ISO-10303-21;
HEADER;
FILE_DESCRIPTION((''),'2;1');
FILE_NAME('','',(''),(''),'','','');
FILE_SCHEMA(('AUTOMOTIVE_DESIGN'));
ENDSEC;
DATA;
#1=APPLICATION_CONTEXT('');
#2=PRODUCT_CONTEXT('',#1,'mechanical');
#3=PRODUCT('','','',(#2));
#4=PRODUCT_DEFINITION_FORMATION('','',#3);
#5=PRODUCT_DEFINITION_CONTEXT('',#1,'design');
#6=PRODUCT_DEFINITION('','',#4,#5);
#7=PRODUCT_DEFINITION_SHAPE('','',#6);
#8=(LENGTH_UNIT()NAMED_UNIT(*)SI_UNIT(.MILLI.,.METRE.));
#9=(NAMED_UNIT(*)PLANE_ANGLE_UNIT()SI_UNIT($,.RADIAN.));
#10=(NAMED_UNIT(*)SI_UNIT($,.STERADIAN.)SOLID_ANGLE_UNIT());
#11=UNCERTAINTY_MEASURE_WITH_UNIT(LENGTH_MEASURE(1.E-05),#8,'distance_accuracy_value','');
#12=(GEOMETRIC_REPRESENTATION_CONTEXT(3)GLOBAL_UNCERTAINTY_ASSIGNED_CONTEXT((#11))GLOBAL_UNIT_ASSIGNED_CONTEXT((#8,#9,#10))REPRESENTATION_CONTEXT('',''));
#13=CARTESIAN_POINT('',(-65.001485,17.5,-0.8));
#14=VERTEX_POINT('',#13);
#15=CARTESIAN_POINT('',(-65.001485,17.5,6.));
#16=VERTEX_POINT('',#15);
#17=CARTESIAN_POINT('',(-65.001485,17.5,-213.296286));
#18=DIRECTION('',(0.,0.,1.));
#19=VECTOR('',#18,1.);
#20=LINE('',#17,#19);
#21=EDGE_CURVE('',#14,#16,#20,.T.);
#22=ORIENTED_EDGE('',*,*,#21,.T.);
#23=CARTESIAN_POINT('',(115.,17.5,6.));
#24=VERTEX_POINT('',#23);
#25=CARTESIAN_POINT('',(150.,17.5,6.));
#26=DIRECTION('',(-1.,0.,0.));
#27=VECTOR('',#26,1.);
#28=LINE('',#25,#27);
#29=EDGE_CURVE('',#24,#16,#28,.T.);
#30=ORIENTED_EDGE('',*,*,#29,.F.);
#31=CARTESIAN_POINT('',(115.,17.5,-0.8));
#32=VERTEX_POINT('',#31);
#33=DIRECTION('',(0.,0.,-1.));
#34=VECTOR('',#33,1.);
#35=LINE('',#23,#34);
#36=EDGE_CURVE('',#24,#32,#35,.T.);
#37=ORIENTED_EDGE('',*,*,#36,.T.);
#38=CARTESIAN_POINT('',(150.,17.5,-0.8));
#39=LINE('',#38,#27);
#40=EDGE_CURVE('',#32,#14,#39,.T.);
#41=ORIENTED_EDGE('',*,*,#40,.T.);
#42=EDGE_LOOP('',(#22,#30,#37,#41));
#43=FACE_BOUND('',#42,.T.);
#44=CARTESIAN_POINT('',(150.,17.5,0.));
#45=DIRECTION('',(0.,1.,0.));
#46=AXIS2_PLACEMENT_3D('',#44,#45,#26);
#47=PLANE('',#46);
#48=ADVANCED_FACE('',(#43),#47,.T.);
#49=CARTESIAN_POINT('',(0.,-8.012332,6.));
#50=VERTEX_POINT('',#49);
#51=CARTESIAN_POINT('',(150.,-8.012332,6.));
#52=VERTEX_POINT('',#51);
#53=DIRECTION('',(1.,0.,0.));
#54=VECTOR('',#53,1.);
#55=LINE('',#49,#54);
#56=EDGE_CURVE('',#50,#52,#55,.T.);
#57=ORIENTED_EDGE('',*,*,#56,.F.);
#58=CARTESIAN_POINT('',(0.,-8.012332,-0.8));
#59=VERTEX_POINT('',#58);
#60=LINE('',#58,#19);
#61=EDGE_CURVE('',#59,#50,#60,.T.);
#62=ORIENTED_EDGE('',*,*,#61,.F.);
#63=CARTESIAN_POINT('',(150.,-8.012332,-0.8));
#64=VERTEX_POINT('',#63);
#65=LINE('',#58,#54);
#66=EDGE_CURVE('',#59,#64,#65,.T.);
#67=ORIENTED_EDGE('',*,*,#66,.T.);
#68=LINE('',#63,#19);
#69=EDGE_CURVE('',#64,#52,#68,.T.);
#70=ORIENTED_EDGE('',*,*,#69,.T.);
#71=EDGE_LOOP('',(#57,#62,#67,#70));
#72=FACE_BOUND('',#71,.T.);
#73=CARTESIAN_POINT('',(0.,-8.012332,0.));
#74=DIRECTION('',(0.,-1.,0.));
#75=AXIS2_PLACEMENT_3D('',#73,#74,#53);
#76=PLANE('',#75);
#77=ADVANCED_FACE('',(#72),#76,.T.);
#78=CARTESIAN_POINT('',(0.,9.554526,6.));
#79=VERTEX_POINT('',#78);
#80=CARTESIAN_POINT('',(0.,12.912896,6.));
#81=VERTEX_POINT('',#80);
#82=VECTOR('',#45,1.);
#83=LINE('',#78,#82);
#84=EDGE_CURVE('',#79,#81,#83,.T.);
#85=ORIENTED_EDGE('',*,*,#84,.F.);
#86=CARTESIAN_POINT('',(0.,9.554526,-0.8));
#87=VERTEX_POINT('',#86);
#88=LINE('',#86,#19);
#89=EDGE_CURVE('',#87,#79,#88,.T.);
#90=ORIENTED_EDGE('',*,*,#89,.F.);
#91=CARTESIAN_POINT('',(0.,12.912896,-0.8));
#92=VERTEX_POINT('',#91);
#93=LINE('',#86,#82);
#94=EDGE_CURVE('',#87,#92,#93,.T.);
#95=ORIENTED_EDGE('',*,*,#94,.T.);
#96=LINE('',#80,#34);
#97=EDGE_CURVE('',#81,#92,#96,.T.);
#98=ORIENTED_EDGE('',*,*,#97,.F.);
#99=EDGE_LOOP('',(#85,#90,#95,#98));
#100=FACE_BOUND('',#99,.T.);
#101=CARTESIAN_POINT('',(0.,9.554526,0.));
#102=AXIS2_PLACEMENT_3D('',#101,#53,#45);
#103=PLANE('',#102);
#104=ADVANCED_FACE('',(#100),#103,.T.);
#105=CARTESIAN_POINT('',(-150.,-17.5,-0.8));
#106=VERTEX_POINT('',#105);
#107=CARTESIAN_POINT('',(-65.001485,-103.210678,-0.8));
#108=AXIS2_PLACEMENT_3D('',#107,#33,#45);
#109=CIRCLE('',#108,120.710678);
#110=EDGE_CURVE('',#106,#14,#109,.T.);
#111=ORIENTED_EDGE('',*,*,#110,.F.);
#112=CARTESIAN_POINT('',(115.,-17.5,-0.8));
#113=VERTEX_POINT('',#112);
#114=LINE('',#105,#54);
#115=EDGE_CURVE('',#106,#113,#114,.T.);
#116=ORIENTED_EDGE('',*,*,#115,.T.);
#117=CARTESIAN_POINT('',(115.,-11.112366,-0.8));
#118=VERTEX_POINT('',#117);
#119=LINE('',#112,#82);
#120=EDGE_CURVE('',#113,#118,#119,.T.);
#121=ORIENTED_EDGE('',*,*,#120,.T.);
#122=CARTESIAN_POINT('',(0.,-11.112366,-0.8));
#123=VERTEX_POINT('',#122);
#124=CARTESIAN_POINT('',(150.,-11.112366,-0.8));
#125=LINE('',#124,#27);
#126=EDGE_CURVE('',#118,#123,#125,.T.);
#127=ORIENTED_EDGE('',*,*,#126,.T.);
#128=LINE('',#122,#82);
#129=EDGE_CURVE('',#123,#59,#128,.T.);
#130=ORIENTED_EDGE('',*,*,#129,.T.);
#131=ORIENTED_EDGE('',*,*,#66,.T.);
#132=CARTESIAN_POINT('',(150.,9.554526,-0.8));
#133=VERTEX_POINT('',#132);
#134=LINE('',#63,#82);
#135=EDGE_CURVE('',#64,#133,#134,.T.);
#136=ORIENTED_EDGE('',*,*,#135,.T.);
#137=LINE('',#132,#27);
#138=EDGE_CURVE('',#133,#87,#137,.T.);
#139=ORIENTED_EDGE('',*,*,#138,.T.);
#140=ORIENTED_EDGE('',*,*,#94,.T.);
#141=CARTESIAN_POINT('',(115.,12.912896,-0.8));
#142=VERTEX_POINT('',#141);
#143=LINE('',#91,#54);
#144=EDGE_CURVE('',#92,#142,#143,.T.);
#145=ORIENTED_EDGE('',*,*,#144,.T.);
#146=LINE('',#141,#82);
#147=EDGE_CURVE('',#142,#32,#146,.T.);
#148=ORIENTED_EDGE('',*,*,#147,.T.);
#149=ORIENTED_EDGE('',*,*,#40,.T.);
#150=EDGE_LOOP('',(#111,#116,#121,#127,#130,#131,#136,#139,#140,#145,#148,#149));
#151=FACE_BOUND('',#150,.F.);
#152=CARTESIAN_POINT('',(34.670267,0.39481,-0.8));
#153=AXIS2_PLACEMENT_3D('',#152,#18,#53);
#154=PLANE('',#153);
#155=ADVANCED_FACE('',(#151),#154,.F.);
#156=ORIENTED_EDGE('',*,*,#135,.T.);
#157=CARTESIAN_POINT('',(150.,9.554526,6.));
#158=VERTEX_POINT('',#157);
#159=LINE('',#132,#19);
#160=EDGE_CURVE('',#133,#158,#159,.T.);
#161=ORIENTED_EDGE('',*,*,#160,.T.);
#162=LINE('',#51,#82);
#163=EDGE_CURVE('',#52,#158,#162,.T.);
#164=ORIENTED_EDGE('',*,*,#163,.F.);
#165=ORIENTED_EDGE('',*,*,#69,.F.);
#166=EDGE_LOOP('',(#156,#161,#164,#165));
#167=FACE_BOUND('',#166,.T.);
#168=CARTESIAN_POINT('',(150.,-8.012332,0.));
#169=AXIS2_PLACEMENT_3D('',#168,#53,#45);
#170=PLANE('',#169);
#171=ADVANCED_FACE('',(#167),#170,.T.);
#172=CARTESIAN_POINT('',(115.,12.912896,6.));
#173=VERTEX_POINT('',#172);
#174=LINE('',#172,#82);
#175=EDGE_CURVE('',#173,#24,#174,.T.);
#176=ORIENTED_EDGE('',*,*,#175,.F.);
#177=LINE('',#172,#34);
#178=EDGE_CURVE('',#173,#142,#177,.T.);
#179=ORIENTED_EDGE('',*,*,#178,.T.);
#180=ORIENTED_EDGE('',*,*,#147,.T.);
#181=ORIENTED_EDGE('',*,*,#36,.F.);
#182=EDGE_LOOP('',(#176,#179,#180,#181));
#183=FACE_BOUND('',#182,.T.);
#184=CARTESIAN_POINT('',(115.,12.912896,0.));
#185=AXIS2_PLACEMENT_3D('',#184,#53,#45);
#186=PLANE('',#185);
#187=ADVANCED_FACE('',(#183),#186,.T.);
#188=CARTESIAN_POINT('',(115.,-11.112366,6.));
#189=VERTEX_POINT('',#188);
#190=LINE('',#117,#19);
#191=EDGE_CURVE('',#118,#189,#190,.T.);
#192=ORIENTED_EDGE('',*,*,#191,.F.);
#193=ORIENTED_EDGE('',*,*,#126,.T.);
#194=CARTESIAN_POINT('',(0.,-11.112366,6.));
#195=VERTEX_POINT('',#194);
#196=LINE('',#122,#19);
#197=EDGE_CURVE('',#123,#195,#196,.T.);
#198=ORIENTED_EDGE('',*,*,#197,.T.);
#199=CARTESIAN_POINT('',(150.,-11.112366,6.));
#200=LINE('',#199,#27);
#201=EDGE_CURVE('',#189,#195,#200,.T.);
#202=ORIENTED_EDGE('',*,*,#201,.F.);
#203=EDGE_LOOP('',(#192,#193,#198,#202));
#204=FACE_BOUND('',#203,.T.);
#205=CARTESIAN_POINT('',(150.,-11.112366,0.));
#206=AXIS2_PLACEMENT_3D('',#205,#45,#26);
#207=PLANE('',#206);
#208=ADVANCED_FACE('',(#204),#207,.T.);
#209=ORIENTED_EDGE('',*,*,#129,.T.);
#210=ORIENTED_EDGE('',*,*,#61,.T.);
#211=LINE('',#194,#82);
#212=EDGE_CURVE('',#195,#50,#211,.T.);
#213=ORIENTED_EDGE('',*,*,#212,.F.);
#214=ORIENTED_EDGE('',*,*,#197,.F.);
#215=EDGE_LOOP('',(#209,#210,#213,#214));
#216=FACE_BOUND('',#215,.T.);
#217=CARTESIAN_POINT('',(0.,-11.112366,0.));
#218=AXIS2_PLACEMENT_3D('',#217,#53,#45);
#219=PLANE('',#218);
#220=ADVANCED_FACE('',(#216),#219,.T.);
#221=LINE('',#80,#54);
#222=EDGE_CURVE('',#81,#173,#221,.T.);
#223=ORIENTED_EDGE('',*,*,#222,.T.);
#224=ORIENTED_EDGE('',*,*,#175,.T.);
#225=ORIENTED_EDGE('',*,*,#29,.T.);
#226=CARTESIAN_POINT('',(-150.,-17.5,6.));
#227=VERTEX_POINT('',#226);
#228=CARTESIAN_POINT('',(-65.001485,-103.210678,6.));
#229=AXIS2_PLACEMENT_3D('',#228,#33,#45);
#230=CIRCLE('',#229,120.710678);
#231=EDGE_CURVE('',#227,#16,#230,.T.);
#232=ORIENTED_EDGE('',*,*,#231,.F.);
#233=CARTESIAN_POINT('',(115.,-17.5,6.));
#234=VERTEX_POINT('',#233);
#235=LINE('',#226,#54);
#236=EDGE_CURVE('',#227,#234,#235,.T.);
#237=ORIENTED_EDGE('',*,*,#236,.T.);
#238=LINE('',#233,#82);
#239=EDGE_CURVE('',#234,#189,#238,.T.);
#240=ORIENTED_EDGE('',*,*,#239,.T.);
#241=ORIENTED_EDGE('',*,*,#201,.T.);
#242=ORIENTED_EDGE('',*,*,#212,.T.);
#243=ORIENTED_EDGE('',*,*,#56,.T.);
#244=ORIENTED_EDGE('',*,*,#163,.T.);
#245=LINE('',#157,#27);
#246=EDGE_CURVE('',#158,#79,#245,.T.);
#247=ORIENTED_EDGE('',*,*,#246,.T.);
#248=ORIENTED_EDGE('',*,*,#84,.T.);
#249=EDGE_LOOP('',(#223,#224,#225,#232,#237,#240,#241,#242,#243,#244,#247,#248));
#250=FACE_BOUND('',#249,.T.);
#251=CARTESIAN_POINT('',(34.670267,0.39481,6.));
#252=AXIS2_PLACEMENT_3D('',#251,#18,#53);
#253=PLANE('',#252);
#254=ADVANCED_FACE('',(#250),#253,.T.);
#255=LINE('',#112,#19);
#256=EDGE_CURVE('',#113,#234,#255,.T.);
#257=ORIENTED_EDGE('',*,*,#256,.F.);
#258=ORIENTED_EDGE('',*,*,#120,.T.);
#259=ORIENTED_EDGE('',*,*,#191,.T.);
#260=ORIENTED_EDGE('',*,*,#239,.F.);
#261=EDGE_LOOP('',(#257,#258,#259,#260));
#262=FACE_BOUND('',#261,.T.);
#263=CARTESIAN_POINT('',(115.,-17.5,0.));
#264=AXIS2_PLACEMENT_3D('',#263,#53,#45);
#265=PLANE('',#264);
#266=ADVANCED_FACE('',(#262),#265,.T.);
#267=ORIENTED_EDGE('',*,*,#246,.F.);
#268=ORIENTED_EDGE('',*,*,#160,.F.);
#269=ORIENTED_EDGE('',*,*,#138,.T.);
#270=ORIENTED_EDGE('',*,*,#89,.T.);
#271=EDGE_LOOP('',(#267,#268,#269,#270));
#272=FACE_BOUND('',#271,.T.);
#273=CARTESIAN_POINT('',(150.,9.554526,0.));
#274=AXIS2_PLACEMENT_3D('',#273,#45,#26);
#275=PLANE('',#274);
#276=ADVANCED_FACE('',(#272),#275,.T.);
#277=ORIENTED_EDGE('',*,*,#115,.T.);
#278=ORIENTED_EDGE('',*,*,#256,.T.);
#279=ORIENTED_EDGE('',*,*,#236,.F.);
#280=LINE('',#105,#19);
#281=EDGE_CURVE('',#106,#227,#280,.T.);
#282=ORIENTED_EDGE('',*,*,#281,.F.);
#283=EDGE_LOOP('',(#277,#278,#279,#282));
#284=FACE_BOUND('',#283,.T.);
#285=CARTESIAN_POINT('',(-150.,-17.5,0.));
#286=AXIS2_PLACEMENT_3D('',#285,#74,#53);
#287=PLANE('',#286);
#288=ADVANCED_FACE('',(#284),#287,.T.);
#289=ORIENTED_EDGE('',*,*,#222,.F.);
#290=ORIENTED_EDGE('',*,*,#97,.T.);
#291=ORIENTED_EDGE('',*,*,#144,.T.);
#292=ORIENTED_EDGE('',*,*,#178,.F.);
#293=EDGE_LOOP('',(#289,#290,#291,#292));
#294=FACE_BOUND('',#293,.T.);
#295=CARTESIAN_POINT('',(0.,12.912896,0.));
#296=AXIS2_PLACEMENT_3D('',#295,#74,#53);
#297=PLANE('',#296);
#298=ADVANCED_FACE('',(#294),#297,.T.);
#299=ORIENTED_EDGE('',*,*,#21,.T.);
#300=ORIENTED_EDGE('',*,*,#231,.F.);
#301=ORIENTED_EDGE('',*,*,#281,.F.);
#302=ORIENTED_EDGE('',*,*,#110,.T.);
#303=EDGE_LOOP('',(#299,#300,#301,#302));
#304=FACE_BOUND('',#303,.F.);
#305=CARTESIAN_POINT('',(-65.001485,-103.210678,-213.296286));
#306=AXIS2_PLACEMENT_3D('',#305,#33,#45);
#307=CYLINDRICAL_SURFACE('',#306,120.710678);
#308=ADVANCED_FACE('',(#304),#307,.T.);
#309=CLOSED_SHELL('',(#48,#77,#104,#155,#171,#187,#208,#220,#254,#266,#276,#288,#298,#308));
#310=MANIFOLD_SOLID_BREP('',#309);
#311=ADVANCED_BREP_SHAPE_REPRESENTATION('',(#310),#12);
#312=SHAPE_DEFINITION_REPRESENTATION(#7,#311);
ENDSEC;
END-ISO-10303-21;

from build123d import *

# Parameters (mm, degrees)
F1_DEPTH    = 6
F2_DEPTH    = 0.8
F3_T1_DEPTH = 431.7925725323
F4_DEPTH    = 35


# Not quite as in the source:
# - a fillet or chamfer that OpenCascade refuses, or shapes differently, is made with other operations: its cross-section is extruded or revolved along the edge and cut away or added


with BuildPart() as f1:
    # F0 (on Top) → F1 (new body)
    with BuildSketch(Plane.XY):
        Polygon((150, 17.5), (-150, 17.5), (-150, -17.5), (150, -17.5), (150, -11.1123658717), (0, -11.1123658717), (0, -8.0123320222), (150, -8.0123320222), (150, 9.5545258373), (0, 9.5545258373), (0, 12.9128964618), (150, 12.9128964618), align=None)
    extrude(amount=F1_DEPTH)

    # F2 (add): faces of the model
    f2_faces = [f1.faces().sort_by_distance(p)[0] for p in [
        (-7.6230433236, -0.1272136786, 0),
        (-7.6230433236, -0.1272136786, 6),
    ]]
    extrude(f2_faces, amount=F2_DEPTH, dir=(0, 0, -1))

    # F3: fillet of radius 120.7106781187 on 1 edges, made by hand

    # F3_s2 → F3_t1 (cut)
    with BuildSketch(Plane.XY.offset(-213.2962862662)):
        with BuildLine():
            ThreePointArc((-65.0014854935, 17.5), (-110.9627394699, 8.4075593911), (-150, -17.5))
            Line((-150, -17.5), (-150, 17.5))
            Line((-150, 17.5), (-65.0014854935, 17.5))
        make_face()
    extrude(amount=F3_T1_DEPTH, mode=Mode.SUBTRACT)

    # F4 (cut): faces of the model
    f4_faces = [f1.faces().sort_by_distance(p)[0] for p in [
        (150, 15.2064482309, 2.6),
        (150, -14.3061829358, 2.6),
    ]]
    extrude(f4_faces, amount=-F4_DEPTH, mode=Mode.SUBTRACT)


solid = f1.part
